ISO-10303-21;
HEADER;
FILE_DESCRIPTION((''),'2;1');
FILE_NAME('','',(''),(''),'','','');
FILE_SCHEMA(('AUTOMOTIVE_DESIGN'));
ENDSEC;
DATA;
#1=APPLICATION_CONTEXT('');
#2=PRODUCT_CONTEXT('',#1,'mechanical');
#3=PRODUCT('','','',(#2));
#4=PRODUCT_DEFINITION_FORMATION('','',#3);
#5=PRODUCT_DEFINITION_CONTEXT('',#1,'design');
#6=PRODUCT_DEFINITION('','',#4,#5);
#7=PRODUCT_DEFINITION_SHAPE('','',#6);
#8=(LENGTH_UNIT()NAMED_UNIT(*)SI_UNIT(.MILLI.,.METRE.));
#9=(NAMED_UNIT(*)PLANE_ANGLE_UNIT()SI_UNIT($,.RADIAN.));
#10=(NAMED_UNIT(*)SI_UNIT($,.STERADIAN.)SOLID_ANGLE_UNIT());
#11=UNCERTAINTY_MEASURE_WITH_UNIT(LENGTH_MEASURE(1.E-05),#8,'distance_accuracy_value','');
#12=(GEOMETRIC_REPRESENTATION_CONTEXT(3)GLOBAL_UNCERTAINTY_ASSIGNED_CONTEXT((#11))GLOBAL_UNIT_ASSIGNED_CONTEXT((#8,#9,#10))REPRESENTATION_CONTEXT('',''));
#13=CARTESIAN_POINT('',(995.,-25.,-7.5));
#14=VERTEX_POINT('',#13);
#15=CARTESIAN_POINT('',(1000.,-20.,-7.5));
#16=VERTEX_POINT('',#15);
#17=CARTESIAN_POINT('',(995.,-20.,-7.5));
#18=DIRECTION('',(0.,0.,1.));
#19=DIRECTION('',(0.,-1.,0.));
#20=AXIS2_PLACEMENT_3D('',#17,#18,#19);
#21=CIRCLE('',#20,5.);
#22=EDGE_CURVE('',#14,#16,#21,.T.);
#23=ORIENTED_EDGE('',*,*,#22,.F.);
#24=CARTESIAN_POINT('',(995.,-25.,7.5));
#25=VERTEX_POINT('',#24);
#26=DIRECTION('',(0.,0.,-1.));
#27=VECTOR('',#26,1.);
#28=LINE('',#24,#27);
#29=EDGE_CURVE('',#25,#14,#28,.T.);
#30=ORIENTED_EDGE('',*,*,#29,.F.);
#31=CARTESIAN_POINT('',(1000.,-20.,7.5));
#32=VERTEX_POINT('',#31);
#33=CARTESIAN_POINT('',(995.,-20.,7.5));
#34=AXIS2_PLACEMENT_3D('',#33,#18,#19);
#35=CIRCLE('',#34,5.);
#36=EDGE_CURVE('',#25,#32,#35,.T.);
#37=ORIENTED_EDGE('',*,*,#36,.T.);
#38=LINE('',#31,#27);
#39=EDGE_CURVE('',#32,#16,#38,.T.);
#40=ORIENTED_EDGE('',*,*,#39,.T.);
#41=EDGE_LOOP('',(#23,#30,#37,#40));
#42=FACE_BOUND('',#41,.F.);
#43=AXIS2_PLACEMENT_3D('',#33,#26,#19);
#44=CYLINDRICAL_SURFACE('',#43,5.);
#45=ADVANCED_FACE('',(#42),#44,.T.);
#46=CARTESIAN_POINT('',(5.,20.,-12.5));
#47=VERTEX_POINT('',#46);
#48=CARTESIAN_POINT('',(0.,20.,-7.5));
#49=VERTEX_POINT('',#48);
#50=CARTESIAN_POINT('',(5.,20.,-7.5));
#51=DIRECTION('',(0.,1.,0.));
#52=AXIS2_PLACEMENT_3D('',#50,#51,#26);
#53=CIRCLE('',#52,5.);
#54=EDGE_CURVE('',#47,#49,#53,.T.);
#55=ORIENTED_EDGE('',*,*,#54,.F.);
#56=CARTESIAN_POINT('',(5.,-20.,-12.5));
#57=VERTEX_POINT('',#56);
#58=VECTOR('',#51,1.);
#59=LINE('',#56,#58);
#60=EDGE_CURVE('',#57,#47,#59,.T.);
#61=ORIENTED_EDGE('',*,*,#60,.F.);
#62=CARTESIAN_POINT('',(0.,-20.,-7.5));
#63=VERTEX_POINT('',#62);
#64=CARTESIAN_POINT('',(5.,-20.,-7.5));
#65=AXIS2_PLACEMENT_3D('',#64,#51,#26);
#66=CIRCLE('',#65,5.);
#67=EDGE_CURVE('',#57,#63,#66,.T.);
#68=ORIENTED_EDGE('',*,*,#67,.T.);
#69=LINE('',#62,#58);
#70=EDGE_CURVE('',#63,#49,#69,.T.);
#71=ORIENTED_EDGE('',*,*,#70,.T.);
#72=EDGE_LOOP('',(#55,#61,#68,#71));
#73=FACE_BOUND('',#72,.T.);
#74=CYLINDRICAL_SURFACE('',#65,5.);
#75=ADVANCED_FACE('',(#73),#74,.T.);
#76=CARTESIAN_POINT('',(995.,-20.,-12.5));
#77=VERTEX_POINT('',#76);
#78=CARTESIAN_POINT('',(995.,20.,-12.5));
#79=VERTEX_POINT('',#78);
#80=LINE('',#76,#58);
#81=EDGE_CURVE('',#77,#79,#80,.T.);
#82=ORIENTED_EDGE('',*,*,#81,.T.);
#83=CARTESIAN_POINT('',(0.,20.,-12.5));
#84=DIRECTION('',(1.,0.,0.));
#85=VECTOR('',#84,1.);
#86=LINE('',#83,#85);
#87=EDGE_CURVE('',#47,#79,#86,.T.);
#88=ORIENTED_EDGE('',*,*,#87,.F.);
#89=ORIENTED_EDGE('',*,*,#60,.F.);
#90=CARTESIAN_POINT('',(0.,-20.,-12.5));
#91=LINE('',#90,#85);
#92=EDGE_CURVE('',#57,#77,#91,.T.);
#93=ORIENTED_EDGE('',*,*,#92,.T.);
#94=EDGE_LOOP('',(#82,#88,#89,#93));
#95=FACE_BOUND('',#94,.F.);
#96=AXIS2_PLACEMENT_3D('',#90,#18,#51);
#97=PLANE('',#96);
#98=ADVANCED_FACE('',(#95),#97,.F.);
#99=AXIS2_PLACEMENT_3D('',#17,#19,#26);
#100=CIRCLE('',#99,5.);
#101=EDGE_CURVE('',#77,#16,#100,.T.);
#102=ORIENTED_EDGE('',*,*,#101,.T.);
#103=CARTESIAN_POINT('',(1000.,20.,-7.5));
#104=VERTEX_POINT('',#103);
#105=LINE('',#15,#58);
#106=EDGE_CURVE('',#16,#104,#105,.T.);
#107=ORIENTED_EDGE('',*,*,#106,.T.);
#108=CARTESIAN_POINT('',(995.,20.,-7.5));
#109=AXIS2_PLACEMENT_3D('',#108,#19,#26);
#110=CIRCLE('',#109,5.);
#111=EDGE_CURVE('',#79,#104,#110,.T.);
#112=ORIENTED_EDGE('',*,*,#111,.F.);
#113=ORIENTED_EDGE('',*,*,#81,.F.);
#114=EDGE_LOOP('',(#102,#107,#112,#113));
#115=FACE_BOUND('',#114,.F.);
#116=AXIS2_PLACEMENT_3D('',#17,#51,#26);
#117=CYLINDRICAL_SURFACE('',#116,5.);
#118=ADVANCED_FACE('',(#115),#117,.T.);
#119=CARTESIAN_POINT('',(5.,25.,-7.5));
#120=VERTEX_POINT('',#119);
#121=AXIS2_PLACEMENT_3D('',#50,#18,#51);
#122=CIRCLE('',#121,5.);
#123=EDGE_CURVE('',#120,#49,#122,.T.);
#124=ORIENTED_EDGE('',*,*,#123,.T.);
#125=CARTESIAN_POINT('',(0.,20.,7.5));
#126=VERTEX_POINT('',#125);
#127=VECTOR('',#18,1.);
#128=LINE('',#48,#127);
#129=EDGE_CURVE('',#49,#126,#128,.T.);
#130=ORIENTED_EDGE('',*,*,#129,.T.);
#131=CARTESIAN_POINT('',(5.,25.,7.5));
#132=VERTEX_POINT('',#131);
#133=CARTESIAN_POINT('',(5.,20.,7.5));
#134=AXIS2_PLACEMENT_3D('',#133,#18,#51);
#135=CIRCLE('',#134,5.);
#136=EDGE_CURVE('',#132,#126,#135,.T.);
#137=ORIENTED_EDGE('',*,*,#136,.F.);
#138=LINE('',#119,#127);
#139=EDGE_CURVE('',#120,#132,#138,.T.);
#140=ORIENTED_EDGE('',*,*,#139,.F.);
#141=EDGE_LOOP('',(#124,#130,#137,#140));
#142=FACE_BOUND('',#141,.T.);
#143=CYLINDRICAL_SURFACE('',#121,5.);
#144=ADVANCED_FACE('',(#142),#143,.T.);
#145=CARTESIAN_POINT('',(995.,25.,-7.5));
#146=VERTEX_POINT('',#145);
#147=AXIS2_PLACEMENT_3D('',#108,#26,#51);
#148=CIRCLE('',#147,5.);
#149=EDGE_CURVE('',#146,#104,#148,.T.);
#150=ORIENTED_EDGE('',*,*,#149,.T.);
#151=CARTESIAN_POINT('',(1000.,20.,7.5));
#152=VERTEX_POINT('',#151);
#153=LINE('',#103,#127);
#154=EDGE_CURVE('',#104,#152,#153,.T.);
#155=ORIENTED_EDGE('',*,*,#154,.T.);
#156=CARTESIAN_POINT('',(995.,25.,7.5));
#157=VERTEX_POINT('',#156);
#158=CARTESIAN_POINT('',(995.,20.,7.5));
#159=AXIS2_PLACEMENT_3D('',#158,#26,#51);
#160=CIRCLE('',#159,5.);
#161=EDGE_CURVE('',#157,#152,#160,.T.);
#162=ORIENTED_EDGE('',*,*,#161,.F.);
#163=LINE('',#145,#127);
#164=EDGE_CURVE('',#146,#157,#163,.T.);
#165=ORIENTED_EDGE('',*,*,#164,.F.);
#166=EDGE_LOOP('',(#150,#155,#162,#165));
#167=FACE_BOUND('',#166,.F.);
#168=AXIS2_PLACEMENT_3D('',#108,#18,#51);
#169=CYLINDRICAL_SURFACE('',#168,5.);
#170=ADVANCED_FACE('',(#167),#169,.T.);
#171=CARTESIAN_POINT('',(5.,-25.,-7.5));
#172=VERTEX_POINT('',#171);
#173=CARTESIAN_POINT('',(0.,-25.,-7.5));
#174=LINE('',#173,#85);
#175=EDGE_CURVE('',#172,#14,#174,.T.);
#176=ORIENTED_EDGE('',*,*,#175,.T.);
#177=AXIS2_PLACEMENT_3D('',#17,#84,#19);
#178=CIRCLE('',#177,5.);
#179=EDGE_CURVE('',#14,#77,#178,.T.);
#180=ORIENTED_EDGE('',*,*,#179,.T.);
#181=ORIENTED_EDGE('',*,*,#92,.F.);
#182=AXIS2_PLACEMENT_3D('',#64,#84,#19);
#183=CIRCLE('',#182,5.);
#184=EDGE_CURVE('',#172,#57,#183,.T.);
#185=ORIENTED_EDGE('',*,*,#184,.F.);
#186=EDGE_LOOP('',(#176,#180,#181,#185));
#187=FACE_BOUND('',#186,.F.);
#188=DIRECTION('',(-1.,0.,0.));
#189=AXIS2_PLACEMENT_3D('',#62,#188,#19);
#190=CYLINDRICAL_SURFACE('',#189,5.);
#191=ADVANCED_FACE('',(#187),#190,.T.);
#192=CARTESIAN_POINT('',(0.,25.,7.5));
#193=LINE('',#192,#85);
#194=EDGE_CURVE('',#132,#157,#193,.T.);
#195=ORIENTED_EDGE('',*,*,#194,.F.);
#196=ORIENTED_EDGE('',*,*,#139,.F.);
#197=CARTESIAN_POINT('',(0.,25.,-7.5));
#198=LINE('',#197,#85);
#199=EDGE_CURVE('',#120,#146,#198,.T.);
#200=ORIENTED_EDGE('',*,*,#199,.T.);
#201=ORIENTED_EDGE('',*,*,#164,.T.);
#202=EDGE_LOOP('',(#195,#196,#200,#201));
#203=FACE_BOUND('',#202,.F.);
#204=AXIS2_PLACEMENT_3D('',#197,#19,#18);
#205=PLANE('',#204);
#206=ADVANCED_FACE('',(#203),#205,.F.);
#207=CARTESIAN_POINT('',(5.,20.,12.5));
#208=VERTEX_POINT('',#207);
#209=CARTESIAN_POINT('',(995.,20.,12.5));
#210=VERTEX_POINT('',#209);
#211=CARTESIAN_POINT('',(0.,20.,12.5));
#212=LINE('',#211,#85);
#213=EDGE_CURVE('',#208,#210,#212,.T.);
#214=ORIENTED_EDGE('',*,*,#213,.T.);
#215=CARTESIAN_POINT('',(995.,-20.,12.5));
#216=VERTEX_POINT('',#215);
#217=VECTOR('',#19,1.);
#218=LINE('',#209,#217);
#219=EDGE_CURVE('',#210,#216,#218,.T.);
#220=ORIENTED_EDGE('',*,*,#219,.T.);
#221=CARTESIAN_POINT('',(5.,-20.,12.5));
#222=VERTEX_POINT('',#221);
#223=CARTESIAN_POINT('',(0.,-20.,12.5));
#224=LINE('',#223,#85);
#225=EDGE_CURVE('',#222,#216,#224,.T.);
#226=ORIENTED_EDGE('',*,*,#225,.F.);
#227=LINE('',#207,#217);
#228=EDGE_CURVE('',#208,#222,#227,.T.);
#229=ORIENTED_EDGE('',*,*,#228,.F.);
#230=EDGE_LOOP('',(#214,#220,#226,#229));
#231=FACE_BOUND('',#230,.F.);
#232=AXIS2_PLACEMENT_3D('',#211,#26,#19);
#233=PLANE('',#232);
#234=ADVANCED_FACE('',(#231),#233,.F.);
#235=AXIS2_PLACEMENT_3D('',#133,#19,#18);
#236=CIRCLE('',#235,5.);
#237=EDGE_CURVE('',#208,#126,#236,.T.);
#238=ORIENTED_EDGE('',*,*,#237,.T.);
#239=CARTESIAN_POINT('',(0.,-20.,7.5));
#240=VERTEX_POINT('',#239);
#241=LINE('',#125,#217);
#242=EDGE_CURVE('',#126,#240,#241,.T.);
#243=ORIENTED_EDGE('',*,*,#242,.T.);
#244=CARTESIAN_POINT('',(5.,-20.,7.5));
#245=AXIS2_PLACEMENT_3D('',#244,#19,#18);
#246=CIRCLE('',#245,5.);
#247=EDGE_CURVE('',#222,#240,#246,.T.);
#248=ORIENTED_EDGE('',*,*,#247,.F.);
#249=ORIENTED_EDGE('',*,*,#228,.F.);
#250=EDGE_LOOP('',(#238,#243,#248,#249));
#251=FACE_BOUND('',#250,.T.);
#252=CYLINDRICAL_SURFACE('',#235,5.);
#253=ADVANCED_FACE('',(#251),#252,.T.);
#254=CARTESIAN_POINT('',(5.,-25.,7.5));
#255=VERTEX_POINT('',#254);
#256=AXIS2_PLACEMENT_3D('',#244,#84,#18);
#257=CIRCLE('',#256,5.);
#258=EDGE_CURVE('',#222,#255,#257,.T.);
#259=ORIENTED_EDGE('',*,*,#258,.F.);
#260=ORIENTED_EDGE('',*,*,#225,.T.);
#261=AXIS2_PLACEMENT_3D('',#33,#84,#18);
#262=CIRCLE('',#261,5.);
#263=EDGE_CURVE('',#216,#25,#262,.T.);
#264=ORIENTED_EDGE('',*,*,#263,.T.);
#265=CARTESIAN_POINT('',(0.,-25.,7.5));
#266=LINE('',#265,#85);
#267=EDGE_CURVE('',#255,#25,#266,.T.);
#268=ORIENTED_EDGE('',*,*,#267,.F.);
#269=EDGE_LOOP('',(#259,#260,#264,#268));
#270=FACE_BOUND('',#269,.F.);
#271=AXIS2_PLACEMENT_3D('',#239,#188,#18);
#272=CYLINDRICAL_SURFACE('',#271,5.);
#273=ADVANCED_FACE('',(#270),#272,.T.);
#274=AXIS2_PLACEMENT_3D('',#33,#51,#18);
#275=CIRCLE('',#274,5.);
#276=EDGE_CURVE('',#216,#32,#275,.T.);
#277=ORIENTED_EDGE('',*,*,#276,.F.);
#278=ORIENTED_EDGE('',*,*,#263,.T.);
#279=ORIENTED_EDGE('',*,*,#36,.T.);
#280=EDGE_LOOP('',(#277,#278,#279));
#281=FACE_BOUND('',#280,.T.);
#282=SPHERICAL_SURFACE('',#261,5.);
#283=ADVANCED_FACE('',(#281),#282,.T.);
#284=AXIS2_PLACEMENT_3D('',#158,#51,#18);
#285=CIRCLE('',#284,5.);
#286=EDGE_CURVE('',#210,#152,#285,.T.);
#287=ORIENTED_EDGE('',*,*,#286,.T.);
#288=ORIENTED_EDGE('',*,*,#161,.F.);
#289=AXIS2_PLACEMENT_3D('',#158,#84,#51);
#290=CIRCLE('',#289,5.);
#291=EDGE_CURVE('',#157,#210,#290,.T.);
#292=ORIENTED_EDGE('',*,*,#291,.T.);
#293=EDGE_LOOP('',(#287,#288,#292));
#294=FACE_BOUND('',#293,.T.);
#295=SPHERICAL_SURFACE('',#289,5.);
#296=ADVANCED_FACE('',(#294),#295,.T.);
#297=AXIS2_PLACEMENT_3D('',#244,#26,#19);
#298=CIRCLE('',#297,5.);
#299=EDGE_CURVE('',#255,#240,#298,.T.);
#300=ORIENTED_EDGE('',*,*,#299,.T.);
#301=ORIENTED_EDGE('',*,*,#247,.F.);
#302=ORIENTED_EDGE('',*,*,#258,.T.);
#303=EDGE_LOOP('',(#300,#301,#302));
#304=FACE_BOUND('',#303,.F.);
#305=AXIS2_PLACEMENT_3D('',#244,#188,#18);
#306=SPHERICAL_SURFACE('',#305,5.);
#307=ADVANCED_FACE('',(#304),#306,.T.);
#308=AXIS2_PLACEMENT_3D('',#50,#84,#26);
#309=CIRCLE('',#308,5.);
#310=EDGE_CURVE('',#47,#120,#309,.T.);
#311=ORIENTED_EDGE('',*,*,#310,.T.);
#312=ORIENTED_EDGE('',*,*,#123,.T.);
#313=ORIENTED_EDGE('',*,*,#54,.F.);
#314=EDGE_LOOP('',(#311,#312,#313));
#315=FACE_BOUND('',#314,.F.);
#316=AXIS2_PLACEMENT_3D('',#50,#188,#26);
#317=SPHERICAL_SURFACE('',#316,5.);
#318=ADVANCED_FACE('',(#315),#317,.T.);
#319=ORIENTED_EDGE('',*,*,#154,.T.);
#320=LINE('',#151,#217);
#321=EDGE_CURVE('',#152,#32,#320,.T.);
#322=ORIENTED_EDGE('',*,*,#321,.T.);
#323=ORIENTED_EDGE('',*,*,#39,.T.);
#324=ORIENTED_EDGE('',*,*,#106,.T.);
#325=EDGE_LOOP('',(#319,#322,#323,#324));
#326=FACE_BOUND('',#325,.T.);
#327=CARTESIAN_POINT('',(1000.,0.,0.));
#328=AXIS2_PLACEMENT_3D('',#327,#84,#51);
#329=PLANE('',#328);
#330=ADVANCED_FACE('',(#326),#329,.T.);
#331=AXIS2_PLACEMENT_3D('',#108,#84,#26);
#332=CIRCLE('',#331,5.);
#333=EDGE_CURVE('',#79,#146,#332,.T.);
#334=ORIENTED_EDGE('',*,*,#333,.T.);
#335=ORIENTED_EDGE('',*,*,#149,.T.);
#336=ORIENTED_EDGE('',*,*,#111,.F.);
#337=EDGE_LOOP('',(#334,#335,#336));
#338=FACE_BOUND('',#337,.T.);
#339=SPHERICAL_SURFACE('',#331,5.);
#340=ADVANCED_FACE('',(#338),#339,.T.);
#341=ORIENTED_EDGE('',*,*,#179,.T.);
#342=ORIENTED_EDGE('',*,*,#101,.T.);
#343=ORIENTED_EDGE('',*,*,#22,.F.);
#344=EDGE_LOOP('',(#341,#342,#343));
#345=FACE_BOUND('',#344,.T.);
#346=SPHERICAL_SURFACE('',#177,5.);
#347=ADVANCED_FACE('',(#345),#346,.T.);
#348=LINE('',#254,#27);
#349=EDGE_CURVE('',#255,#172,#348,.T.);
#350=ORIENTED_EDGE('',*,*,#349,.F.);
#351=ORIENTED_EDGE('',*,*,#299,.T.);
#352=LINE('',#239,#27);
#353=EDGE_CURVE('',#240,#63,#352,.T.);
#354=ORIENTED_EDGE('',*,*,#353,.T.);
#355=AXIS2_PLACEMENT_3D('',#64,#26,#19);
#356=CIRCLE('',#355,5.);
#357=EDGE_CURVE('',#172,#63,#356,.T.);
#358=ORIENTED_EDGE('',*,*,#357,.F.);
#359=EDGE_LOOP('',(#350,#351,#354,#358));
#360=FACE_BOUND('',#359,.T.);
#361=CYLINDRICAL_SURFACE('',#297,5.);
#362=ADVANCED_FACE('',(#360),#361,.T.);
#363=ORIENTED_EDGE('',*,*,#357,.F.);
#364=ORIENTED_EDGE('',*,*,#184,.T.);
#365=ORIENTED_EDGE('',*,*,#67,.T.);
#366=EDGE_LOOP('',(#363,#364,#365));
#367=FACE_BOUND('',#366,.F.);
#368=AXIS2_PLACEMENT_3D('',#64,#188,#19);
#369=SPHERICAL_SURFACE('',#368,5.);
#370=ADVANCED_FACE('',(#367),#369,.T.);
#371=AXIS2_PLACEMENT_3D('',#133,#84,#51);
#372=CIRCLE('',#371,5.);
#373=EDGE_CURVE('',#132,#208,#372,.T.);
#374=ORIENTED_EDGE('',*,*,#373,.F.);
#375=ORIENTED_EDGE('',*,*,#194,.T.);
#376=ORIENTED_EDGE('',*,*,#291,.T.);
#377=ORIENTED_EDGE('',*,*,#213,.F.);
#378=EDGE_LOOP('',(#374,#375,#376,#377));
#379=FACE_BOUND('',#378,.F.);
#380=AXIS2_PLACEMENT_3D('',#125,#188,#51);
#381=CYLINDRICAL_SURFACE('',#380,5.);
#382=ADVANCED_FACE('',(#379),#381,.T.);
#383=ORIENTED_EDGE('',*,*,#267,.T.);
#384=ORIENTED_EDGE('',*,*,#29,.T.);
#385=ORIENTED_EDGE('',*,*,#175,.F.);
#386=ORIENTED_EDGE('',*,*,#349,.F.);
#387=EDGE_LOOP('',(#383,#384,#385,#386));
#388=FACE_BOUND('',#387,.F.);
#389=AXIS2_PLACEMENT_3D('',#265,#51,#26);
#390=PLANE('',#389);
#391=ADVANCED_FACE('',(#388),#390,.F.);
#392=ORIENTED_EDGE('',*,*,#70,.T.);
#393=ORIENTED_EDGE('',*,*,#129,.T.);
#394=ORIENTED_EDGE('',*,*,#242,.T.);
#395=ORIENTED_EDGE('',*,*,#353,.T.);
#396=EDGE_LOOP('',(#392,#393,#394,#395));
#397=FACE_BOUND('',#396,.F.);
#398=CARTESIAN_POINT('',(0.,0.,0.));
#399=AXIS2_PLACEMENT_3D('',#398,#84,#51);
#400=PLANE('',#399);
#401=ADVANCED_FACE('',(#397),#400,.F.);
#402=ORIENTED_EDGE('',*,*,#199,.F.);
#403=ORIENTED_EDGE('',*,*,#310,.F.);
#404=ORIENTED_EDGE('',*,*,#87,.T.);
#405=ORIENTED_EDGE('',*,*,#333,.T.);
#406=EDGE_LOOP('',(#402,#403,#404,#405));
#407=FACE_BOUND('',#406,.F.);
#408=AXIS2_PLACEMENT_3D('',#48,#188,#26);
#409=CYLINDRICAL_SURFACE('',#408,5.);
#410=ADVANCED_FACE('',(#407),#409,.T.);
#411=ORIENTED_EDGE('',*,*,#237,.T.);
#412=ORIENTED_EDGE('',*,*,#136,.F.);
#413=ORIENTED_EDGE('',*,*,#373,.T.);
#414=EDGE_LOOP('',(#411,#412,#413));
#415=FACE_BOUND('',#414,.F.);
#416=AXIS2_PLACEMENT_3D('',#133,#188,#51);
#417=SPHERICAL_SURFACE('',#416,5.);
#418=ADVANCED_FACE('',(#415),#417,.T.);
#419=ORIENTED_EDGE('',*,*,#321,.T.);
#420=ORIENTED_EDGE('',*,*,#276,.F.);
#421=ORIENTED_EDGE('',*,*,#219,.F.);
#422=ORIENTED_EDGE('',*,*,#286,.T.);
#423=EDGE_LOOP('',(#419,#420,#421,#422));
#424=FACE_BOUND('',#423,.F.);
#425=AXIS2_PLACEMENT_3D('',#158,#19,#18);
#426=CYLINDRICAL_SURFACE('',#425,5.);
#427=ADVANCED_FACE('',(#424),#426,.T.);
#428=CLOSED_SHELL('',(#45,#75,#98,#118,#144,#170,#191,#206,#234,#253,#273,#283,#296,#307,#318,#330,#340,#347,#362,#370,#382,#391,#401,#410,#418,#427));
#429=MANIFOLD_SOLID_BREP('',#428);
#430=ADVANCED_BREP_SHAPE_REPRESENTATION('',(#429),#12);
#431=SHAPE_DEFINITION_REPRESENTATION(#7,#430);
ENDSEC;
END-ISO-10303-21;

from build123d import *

# Parameters (mm, degrees)
F1_DEPTH = 1000
F2_R     = 5


with BuildPart() as f1:
    # F0 (on Right) → F1 (new body)
    with BuildSketch(Plane.YZ):
        with BuildLine():
            Line((-20, -12.5), (20, -12.5))
            ThreePointArc((20, -12.5), (23.5355339059, -11.0355339059), (25, -7.5))
            Line((25, -7.5), (25, 7.5))
            ThreePointArc((25, 7.5), (23.5355339059, 11.0355339059), (20, 12.5))
            Line((20, 12.5), (-20, 12.5))
            ThreePointArc((-20, 12.5), (-23.5355339059, 11.0355339059), (-25, 7.5))
            Line((-25, 7.5), (-25, -7.5))
            ThreePointArc((-25, -7.5), (-23.5355339059, -11.0355339059), (-20, -12.5))
        make_face()
    extrude(amount=F1_DEPTH)

    # F2
    f2_edges = [f1.edges().sort_by_distance(p)[0] for p in [
        (1000, -25, 0),
        (0, 25, 0),
    ]]
    fillet(f2_edges, radius=F2_R)


solid = f1.part
